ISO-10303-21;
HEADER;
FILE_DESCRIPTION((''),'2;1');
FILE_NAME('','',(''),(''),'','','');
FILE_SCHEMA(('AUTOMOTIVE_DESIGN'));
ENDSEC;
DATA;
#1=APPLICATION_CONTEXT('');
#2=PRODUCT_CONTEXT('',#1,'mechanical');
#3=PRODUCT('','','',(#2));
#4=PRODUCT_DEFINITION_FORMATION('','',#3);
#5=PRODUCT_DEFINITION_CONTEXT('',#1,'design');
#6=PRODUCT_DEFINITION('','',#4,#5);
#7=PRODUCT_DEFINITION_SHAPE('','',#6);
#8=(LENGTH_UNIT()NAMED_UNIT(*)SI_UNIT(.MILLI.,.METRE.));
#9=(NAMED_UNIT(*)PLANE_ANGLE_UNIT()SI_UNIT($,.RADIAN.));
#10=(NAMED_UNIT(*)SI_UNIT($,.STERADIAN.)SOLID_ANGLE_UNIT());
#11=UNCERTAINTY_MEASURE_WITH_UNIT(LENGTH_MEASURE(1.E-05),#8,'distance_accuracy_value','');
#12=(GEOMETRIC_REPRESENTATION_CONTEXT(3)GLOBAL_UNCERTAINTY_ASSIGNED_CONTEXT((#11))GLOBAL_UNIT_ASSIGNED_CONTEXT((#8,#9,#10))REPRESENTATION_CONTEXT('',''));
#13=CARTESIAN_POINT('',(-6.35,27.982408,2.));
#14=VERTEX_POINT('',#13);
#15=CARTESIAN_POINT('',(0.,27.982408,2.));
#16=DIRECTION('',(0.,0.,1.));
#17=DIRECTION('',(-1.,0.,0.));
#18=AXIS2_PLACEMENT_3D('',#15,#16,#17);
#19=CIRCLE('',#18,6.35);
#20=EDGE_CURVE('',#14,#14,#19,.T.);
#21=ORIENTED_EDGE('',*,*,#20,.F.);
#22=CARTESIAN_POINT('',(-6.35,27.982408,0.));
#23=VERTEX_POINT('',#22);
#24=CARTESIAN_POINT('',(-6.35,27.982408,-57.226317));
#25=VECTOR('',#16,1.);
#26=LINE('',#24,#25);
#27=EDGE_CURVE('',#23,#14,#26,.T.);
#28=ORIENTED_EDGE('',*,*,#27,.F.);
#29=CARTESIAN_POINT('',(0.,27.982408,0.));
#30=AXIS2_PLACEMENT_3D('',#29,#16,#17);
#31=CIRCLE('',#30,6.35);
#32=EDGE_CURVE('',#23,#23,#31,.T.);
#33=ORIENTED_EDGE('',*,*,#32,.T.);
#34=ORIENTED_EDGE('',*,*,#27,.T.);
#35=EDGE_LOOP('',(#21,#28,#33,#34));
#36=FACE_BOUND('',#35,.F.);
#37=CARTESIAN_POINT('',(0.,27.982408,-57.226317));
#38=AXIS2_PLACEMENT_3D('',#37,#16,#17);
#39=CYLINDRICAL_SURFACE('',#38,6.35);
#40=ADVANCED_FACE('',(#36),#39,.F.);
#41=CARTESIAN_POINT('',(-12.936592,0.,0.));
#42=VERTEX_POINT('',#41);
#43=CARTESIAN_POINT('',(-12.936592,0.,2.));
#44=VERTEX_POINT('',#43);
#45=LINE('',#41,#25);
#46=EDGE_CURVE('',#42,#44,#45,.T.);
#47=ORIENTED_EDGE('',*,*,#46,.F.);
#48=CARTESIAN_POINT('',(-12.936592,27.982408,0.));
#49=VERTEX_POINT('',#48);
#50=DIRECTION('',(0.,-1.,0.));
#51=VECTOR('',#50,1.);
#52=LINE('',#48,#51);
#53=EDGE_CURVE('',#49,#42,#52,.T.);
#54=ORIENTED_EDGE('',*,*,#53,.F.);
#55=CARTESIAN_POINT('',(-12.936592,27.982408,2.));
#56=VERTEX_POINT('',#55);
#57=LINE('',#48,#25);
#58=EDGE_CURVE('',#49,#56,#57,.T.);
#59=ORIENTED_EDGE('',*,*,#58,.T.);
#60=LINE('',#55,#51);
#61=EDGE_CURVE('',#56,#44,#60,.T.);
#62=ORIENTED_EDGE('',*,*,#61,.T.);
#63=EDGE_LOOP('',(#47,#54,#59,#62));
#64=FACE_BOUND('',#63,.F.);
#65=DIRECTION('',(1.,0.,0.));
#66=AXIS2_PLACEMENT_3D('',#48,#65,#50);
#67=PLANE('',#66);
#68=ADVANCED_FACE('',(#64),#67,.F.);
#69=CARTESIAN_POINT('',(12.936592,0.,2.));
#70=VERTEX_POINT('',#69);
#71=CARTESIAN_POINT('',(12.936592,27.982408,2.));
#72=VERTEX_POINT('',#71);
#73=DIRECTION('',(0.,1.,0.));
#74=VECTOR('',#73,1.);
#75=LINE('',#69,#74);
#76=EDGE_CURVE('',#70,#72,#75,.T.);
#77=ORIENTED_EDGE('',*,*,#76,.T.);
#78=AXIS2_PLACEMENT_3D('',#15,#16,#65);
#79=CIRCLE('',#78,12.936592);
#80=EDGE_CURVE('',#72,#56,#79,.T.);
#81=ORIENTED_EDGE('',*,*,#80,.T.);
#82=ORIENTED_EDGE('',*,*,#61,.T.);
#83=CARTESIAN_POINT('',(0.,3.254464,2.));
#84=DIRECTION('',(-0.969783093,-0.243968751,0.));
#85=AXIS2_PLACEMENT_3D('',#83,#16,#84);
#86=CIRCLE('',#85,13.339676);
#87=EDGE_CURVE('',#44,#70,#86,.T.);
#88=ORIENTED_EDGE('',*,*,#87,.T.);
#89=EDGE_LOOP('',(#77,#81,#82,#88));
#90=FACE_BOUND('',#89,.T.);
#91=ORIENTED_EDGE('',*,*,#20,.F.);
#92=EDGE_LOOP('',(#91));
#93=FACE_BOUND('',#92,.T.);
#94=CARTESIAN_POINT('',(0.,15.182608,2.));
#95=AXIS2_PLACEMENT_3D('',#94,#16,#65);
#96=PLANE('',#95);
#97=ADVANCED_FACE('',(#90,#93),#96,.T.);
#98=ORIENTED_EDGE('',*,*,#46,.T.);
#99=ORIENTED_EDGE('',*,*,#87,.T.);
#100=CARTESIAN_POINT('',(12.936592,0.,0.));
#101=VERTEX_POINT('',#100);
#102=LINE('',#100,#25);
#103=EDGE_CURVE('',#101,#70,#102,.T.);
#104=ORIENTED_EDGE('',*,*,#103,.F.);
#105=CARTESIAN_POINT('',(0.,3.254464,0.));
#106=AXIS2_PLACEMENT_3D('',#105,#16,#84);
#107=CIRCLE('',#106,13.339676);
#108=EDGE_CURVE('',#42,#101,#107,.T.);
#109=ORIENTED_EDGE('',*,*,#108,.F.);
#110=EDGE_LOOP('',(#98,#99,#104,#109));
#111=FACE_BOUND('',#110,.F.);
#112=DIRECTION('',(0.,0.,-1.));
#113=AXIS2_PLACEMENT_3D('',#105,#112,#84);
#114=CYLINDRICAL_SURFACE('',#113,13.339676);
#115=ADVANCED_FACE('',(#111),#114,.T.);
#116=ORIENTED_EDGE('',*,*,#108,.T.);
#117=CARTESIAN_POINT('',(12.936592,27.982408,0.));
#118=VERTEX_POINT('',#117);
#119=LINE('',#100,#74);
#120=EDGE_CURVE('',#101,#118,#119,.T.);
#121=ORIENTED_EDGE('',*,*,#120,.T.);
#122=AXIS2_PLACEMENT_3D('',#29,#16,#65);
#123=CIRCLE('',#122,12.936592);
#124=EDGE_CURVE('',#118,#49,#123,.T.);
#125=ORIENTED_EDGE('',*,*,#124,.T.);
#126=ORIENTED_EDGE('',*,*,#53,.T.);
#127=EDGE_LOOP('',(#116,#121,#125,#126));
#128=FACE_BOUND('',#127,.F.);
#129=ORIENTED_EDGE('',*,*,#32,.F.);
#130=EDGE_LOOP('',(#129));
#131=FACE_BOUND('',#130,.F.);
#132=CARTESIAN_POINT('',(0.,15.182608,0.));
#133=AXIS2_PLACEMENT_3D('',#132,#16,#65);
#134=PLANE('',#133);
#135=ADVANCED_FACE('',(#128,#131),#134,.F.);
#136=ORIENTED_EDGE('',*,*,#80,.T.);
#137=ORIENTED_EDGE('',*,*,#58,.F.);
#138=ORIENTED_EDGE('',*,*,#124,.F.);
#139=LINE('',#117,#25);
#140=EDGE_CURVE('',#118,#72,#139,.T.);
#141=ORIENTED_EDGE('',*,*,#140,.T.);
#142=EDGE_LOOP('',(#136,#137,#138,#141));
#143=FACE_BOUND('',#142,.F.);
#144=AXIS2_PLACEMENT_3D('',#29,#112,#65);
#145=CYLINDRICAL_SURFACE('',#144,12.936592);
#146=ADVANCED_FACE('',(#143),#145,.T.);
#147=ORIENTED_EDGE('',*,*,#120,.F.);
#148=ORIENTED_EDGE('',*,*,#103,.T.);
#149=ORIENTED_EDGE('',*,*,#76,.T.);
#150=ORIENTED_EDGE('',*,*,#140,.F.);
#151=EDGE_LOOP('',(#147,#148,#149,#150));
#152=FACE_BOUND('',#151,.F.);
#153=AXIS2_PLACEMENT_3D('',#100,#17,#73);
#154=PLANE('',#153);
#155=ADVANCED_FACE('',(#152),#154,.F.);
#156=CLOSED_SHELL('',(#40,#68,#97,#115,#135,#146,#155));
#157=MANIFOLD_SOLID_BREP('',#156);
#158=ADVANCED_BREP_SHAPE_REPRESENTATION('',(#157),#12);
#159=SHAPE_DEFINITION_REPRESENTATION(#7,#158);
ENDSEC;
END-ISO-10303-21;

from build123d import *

# Parameters (mm, degrees)
F1_DEPTH = 2
F2_D     = 12.7


with BuildPart() as f1:
    # F0 (on Top) → F1 (new body)
    with BuildSketch(Plane.XY):
        with BuildLine():
            Line((-12.9365921021, 27.9824081808), (-12.9365921021, 0))
            ThreePointArc((-12.9365921021, 0), (0, -10.0852117819), (12.9365921021, 0))
            Line((12.9365921021, 0), (12.9365921021, 27.9824081808))
            ThreePointArc((12.9365921021, 27.9824081808), (0, 40.9190002829), (-12.9365921021, 27.9824081808))
        make_face()
    extrude(amount=F1_DEPTH)

    # F2 (through all)
    with Locations(Plane(origin=(0, 0, 0), x_dir=(1, 0, 0), z_dir=(0, 0, -1))):
        with Locations((0, -27.9824081808)):
            Hole(F2_D / 2)


solid = f1.part
